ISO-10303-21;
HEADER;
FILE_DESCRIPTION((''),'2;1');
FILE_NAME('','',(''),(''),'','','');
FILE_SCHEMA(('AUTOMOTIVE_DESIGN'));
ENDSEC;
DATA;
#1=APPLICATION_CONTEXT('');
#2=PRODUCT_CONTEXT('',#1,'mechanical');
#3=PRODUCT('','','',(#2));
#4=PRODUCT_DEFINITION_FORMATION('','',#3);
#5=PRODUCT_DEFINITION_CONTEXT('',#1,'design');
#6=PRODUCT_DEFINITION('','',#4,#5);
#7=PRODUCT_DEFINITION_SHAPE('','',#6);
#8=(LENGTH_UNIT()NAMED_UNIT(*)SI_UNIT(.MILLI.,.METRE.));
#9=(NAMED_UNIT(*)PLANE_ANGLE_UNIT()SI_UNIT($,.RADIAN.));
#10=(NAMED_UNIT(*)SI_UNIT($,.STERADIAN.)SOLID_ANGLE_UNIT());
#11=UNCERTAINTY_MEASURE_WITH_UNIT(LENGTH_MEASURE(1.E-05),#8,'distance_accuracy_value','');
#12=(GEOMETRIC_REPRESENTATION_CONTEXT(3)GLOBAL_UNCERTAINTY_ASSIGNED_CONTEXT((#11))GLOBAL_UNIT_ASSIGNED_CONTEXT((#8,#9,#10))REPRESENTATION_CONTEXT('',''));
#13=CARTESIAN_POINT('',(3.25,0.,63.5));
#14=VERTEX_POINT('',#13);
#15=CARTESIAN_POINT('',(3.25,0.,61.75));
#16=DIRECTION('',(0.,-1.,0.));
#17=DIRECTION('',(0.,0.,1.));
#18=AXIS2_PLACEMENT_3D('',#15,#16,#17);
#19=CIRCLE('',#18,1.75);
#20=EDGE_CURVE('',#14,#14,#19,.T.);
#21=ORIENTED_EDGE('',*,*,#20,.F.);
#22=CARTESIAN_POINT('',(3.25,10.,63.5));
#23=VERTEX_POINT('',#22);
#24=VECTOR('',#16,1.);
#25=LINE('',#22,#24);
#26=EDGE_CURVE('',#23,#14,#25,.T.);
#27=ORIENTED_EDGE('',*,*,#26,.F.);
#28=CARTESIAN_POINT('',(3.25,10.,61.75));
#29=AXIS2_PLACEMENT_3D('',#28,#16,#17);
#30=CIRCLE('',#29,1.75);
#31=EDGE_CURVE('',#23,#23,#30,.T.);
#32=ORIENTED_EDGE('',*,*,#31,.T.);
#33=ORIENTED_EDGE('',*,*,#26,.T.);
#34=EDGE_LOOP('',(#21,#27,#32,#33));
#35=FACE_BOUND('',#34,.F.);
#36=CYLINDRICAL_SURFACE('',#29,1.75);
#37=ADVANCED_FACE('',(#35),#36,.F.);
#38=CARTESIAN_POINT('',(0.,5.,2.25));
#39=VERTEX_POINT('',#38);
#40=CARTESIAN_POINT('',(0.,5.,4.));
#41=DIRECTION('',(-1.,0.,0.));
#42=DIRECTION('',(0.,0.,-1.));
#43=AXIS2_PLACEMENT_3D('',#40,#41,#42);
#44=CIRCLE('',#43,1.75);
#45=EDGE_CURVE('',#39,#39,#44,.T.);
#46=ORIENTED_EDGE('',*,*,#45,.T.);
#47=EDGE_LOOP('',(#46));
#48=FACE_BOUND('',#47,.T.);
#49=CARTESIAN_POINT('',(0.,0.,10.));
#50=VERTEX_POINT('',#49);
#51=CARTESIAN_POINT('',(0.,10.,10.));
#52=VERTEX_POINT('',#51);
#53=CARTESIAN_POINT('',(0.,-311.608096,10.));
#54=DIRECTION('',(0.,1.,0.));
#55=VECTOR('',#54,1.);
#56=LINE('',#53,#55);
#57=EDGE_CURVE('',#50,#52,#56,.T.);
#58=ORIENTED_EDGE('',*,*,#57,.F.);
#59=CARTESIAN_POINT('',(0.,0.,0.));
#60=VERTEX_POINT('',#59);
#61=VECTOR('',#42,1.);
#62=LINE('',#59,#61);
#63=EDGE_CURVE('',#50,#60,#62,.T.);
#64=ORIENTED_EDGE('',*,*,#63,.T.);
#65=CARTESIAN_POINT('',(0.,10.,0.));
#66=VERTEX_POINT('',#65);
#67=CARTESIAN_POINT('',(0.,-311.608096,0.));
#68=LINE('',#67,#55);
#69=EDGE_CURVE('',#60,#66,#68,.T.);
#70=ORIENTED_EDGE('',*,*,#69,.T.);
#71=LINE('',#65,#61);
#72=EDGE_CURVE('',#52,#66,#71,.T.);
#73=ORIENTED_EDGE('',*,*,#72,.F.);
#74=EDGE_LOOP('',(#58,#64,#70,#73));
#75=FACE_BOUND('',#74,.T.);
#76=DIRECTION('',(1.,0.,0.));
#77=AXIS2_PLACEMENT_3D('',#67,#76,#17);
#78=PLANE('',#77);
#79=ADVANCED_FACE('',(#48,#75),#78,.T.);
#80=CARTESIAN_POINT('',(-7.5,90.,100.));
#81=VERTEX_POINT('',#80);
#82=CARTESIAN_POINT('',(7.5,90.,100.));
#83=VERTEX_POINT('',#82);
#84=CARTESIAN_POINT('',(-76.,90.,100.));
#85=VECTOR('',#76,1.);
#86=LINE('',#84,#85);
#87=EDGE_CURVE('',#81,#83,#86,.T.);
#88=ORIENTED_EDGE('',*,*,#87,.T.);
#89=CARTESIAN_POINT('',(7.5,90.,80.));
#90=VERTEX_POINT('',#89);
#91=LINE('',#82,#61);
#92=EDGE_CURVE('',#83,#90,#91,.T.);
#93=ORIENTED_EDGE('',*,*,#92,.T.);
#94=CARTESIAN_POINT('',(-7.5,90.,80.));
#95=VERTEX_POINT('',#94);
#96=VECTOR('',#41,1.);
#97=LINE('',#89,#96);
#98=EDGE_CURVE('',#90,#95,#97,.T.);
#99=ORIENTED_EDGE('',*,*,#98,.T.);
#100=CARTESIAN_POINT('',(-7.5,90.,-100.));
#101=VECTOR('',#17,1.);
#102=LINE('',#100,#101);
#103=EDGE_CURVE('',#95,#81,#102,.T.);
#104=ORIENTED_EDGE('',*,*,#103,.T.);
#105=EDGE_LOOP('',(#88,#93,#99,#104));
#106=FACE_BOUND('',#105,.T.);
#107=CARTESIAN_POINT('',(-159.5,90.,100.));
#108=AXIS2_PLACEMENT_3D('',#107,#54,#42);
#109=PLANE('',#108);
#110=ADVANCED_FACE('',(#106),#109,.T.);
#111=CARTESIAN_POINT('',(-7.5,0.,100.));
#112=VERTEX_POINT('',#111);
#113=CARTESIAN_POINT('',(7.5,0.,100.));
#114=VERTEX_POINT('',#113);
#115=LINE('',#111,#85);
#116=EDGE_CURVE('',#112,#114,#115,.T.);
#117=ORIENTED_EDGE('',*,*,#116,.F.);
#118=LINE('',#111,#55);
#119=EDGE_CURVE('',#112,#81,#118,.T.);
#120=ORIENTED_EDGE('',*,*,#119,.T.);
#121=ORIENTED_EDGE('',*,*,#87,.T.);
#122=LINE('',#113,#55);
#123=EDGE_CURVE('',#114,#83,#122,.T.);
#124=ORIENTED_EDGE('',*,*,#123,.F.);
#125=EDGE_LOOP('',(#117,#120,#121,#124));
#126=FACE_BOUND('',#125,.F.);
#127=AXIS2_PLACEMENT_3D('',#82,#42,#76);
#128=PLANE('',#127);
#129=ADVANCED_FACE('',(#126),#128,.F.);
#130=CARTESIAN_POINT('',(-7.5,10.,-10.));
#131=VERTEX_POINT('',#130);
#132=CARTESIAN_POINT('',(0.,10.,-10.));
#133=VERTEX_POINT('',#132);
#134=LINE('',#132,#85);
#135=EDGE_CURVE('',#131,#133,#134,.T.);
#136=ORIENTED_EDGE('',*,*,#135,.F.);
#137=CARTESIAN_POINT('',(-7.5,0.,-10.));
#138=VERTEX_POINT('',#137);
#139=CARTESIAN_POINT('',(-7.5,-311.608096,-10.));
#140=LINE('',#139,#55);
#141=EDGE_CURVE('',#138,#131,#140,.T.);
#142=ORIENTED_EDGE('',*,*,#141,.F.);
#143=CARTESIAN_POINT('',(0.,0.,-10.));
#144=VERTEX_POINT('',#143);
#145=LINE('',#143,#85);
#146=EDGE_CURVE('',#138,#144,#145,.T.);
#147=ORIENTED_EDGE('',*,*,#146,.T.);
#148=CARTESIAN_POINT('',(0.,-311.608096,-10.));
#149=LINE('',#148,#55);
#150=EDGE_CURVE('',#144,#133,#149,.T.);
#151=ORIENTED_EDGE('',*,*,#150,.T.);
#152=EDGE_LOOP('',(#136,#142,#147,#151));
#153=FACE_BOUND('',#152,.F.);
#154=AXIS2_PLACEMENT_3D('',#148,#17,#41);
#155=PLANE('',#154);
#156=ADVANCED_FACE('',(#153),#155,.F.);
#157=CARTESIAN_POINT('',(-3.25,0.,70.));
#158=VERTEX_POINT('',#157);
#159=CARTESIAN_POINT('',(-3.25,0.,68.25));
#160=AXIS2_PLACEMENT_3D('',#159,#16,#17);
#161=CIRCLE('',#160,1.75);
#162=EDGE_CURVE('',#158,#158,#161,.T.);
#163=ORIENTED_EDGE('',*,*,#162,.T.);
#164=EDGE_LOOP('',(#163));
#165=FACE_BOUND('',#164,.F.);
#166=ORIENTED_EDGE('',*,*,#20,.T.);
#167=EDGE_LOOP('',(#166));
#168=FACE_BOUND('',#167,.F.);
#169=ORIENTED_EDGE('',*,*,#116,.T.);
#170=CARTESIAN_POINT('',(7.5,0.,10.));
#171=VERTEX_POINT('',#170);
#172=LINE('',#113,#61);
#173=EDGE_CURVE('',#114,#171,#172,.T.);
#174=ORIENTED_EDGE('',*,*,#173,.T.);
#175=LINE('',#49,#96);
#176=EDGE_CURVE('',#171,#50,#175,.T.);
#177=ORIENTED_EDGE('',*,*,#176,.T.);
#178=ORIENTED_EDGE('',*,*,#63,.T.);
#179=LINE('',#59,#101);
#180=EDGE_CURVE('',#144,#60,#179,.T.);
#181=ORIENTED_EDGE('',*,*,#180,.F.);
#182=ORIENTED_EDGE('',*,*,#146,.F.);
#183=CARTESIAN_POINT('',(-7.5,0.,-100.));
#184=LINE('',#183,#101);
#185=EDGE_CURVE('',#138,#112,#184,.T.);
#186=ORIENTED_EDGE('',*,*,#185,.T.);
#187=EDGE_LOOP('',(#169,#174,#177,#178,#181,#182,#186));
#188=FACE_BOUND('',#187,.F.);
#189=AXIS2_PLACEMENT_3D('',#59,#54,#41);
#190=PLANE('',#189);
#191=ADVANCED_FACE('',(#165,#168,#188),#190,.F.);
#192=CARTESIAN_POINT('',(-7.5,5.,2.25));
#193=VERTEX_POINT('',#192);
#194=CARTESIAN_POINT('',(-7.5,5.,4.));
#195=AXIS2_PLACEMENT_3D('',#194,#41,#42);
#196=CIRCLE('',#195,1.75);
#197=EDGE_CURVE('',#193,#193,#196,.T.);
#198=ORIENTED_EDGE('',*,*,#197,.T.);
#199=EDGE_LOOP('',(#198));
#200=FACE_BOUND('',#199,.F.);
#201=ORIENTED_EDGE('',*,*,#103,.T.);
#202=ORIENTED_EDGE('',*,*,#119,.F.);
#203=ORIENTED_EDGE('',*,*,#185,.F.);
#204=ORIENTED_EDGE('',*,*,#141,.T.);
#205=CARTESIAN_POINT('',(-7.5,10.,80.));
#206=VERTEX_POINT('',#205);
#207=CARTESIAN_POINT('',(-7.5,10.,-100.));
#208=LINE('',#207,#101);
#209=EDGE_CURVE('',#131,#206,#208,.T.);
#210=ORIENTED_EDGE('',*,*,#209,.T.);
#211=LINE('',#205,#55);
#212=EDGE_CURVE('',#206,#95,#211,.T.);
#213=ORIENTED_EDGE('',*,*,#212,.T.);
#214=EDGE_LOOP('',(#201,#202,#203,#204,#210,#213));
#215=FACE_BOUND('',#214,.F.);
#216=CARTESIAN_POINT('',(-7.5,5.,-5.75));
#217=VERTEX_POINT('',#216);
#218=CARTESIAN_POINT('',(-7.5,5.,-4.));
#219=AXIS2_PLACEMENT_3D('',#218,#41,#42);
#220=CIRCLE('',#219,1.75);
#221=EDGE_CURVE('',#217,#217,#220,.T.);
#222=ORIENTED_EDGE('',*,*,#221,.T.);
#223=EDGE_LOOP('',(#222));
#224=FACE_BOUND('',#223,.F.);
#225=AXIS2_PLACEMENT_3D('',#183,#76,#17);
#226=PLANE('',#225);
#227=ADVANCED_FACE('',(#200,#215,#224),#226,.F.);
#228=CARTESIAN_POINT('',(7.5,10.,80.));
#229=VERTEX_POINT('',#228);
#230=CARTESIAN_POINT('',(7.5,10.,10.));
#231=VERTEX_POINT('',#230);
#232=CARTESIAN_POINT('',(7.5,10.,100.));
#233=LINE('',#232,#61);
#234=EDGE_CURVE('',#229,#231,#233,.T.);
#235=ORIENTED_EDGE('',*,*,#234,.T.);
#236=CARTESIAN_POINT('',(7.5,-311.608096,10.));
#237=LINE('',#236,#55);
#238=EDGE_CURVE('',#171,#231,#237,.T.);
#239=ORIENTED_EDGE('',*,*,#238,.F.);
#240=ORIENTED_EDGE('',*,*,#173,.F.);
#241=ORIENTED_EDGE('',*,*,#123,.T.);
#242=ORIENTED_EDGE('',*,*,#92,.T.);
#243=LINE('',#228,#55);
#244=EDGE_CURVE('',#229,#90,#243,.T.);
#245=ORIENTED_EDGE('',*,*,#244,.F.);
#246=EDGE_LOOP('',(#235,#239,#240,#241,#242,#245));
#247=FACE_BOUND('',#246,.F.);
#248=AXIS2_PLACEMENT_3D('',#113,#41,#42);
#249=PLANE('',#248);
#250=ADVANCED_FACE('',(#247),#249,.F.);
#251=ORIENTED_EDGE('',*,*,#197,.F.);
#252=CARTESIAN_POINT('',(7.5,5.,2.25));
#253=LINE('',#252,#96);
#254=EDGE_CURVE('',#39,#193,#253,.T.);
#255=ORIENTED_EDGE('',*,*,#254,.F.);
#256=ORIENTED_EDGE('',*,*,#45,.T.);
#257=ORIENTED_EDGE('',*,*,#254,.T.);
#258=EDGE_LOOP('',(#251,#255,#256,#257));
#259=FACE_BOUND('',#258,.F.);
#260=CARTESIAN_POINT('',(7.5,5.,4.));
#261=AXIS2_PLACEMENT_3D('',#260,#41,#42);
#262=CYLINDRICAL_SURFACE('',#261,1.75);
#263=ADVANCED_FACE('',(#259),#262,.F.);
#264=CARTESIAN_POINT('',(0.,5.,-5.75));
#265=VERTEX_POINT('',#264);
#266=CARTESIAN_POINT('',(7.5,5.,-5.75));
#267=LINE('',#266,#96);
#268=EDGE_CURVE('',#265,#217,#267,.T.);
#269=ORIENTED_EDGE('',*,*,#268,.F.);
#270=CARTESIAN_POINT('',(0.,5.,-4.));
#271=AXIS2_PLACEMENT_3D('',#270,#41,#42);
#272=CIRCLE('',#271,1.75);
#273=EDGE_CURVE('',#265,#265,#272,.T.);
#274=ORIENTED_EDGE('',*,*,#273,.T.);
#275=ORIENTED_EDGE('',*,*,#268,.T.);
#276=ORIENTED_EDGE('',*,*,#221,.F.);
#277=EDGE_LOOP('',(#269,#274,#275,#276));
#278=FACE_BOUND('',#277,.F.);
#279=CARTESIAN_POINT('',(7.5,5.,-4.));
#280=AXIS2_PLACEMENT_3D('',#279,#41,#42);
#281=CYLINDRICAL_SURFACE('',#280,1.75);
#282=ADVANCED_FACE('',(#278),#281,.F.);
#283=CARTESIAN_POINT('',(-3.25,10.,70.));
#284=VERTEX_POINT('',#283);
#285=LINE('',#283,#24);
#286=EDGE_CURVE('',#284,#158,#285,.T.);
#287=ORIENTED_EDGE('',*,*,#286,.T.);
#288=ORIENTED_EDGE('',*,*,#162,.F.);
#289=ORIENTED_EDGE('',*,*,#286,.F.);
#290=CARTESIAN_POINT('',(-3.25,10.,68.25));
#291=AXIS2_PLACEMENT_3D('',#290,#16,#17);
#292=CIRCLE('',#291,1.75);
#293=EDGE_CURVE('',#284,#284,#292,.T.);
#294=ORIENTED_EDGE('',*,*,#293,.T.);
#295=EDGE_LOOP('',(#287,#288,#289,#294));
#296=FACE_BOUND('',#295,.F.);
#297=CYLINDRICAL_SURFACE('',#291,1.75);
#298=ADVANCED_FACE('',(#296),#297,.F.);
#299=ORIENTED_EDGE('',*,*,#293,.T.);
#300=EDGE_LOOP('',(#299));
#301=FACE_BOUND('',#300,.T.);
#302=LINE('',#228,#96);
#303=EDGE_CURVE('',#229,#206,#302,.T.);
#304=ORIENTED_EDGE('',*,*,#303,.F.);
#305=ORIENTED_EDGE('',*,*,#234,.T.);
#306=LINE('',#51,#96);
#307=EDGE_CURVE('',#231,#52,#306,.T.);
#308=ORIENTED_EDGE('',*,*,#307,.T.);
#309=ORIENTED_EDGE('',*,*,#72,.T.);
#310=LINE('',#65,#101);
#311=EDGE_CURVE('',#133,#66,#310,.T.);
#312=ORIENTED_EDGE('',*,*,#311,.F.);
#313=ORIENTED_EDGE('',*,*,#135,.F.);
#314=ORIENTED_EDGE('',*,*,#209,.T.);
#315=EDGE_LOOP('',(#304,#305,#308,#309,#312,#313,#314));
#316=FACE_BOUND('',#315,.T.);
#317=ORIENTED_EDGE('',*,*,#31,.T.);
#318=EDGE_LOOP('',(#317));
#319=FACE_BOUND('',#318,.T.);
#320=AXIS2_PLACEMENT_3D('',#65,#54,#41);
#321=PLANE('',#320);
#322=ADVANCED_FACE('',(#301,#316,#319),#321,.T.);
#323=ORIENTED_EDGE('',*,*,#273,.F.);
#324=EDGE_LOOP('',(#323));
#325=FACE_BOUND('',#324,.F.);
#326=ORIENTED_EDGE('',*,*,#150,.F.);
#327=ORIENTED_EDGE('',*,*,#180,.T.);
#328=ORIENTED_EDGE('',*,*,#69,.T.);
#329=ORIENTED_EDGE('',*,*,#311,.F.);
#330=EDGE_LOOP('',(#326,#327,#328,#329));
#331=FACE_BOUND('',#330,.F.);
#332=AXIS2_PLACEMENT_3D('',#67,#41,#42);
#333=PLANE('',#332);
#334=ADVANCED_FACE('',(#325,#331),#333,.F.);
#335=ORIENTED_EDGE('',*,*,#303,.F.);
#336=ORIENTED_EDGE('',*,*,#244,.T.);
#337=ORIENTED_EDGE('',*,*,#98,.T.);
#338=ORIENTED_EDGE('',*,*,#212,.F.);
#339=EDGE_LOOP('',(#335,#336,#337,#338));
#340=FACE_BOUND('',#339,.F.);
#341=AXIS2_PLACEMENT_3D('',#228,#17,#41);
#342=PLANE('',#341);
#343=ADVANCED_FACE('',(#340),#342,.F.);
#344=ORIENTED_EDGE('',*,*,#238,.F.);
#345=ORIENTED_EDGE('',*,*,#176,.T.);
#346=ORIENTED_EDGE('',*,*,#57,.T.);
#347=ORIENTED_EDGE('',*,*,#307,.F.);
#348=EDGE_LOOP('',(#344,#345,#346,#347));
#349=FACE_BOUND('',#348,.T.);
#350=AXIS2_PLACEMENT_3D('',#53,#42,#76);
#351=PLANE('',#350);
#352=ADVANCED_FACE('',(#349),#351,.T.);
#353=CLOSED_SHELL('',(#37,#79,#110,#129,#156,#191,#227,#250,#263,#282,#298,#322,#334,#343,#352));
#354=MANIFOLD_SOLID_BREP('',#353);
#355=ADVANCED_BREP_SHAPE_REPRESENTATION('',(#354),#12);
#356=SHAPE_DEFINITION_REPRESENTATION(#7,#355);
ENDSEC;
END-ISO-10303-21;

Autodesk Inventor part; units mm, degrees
ref_plane "YZ Plane" through (0, 0, 0) normal (1, 0, 0) x (0, 1, 0)
ref_plane "XZ Plane" through (0, 0, 0) normal (0, 1, 0) x (-1, 0, 0)
ref_plane "XY Plane" through (0, 0, 0) normal (0, 0, 1) x (1, 0, 0)
sketch "Boceto2" plane through (0, 0, 0) normal (0, 1, 0) x (-1, 0, 0)
  line L0 (7.5, 100) -> (-7.5, 100)
  line L1 (-7.5, 100) -> (-7.5, -100)
  line L2 (-7.5, -100) -> (7.5, -100)
  line L3 (7.5, -100) -> (7.5, 100)
  line L4 (7.5, 100) -> (-7.5, -100) construction
  line L5 (-7.5, 100) -> (7.5, -100) construction
  point P0 (0, 0)
  dimension "d7" = 15
  dimension "d8" = 200
extrude "Extrusión1" add sketch "Boceto2" along normal blind 10
sketch "Boceto3" plane through (0, 10, 0) normal (0, 1, 0) x (1, 0, 0)
  line L0 (5, 60) -> (-5, 60)
  line L1 (-5, 60) -> (-5, 70)
  line L2 (-5, 70) -> (5, 70)
  line L3 (5, 70) -> (5, 60)
  line L4 (5, 60) -> (-5, 70) construction
  line L5 (7.5, 100) -> (-7.5, 100) projected
  line L6 (0, 64.5148) -> (0, 61.9205)
  circle A0 centre (3.25, 61.75) radius 1.75
  circle A1 centre (-3.25, 68.25) radius 1.75
  line L7 (-7.5, 100) -> (-7.5, -100) projected
  line L8 (-7.5, 0) -> (0, 0)
  line L9 (5, -70) -> (5, -60)
  line L10 (-5, -70) -> (5, -70)
  line L11 (5, -60) -> (-5, -60)
  line L12 (-5, -60) -> (-5, -70)
  line L13 (5, -60) -> (-5, -70) construction
  line L14 (0, -64.5148) -> (0, -61.9205)
  circle A2 centre (-3.25, -68.25) radius 1.75
  circle A3 centre (3.25, -61.75) radius 1.75
  point P0 (3.25, 68.25)
  point P1 (-5, 65)
  point P2 (-3.25, 61.75)
  point P3 (0, 100)
  point P4 (3.25, -68.25)
  point P5 (-3.25, -61.75)
  point P6 (-5, -65)
  dimension "d12" = 1.75
  dimension "d13" = 1.75
  dimension "d14" = 1.75
  dimension "d15" = 1.75
  dimension "d16" = 10
  dimension "d17" = 10
  dimension "d19" = 30
  dimension "d67" = 31.75
hole "Agujero1" at (3.25, 10, -61.75) at (-3.25, 10, -68.25) at (-3.25, 10, 68.25) at (3.25, 10, 61.75) direction (0, -1, 0) diameter 3.5 end through all
sketch "Boceto4" plane through (0, 10, 0) normal (0, 1, 0) x (1, 0, 0)
  line L0 (-7.5, 100) -> (-7.5, -100) projected
  line L1 (-7.5, -100) -> (7.5, -100)
  line L2 (7.5, -100) -> (7.5, -80)
  line L3 (7.5, -80) -> (-7.5, -80)
  line L4 (-7.5, -80) -> (-7.5, -100)
  line L5 (-7.5, 0) -> (1.0116, 0)
  line L6 (-7.5, -100) -> (-7.5, 100)
  line L7 (-7.5, 100) -> (7.5, 100)
  line L8 (7.5, 100) -> (7.5, 80)
  line L9 (7.5, 80) -> (-7.5, 80)
  line L10 (-7.5, 80) -> (-7.5, 100)
  point P0 (0, 0)
  point P1 (-7.5, -80)
  point P2 (-7.5, 80)
  dimension "d27" = 15
  dimension "d28" = 20
extrude "Extrusión2" add sketch "Boceto4" along normal blind 80
sketch "Boceto5" plane through (0, 90, 0) normal (0, 1, 0) x (1, 0, 0)
  line L0 (-7.5, -100) -> (7.5, -100) projected
  line L1 (-7.5, -100) -> (40.5, -100)
  line L2 (40.5, -100) -> (40.5, 100)
  line L3 (40.5, 100) -> (-7.5, 100)
  line L4 (-7.5, 100) -> (-7.5, -100)
  line L5 (40.5, -100) -> (-159.5, -100)
  line L6 (-159.5, -100) -> (-159.5, 100)
  line L7 (-159.5, 100) -> (40.5, 100)
  line L8 (40.5, 100) -> (40.5, -100)
  point P0 (0, 0)
  point P1 (-7.5, 100)
  dimension "d31" = 48
  dimension "d32" = 200
  dimension "d74" = 200
extrude "Extrusión3" add sketch "Boceto5" along normal blind 110
sketch "Boceto6" plane through (0, 200, 0) normal (0, 1, 0) x (1, 0, 0)
  line L0 (40.5, 100) -> (7.5, 100) projected
  line L1 (40.5, 100) -> (20.5, 100)
  line L2 (20.5, 100) -> (20.5, 80)
  line L3 (7.5, -100) -> (40.5, -100) projected
  line L4 (24, -100) -> (24, -80)
  line L5 (-159.5, 100) -> (-159.5, -100) projected
  line L6 (20.5, 80) -> (-159.5, 80)
  line L7 (-159.5, 80) -> (-159.5, -80)
  line L8 (-159.5, -80) -> (20.5, -80)
  line L9 (20.5, -80) -> (20.5, 80)
  line L10 (-159.5, -100) -> (40.5, -100) projected
  point P0 (7.5, 80)
  point P1 (-159.5, 80)
  dimension "d36" = 20
  dimension "d37" = 20
  dimension "d38" = 20
  dimension "d78" = 20
extrude "Extrusión4" cut sketch "Boceto6" against normal blind 90
sketch "Boceto7" plane through (-159.5, 90, -100) normal (-1, 0, 0) x (0, 0, 1)
  line L0 (0, 110) -> (20, 110) projected
  line L1 (20, 110) -> (10, 110)
  line L2 (10, 110) -> (10, 20)
  line L3 (10, 20) -> (20, 20)
  line L4 (20, 20) -> (20, 110)
  line L5 (180, 110) -> (180, 20) projected
  line L6 (180, 110) -> (190, 110)
  line L7 (190, 110) -> (190, 20)
  line L8 (190, 20) -> (180, 20)
  line L9 (180, 20) -> (180, 110)
  line L10 (200, 0) -> (200, 110) projected
  line L11 (0, 0) -> (0, 110) projected
  line L12 (0, 110) -> (10, 110)
  line L13 (10, 110) -> (10, 20)
  line L14 (10, 20) -> (0, 20)
  line L15 (0, 20) -> (0, 110)
  line L16 (200, 110) -> (0, 110) projected
  line L17 (200, 110) -> (190, 110)
  line L18 (190, 110) -> (190, 20)
  line L19 (190, 20) -> (200, 20)
  line L20 (200, 20) -> (200, 110)
  point P0 (100, -90)
  point P1 (200, 20)
  dimension "d42" = 10
  dimension "d63" = 10
  dimension "d65" = 10
extrude "Extrusión5" cut sketch "Boceto7" against normal blind 30 contours L0 L2 L14 L11 | L16 L10 L19 L7
sketch "Boceto8" plane through (-7.5, 0, 100) normal (0, 0, 1) x (1, 0, 0)
  line L0 (-122, 200) -> (-122, 110) projected
  line L1 (-132, 175) -> (-142, 175)
  line L2 (-142, 175) -> (-142, 185)
  line L3 (-142, 185) -> (-132, 185)
  line L4 (-132, 185) -> (-132, 175)
  line L5 (-132, 175) -> (-142, 185) construction
  line L6 (-142, 175) -> (-132, 185) construction
  line L7 (-152, 200) -> (48, 200) projected
  line L8 (-113, 155) -> (-128, 155)
  line L9 (-152, 110) -> (-122, 110) projected
  line L10 (-132, 180) -> (-131.5898, 180)
  circle A0 centre (-140.25, 183.25) radius 1.75
  circle A1 centre (-133.75, 176.75) radius 1.75
  line L11 (-132, 125) -> (-132, 135)
  line L12 (-142, 125) -> (-132, 125)
  line L13 (-132, 135) -> (-142, 125) construction
  line L14 (-132, 135) -> (-142, 135)
  line L15 (-142, 135) -> (-132, 125) construction
  line L16 (-142, 135) -> (-142, 125)
  line L17 (-132, 130) -> (-131.5898, 130)
  circle A2 centre (-133.75, 133.25) radius 1.75
  circle A3 centre (-140.25, 126.75) radius 1.75
  line L18 (-152, 110) -> (-152, 200) projected
  point P0 (7.5, 0)
  point P1 (-113, 215)
  point P2 (-133.75, 183.25)
  point P3 (-142, 180)
  point P4 (-140.25, 176.75)
  point P5 (48, 200)
  point P6 (-133.75, 126.75)
  point P7 (-140.25, 133.25)
  point P8 (-143, 115)
  point P9 (-133.75, 126.75)
  point P10 (-140.25, 133.25)
  point P11 (-142, 130)
  dimension "d46" = 1.75
  dimension "d47" = 1.75
  dimension "d48" = 1.75
  dimension "d49" = 1.75
  dimension "d50" = 10
  dimension "d51" = 10
  dimension "d52" = 15
  dimension "d66" = 10
  dimension "d70" = 15
hole "Agujero2" at (-147.75, 183.25, 100) at (-141.25, 176.75, 100) at (-147.75, 126.75, 100) at (-141.25, 133.25, 100) direction (0, 0, -1) diameter 3.5 end through all
ref_plane "Plano de trabajo1" through (-159.5, 90, 100) normal (0, -1, 0) x (1, 0, 0)
split "Dividir1" plane through (-159.5, 90, 100) removes the side toward (0, 1, 0)
sketch "Boceto9" plane through (0, 10, 0) normal (0, 1, 0) x (1, 0, 0)
  line L0 (0, 0) -> (0, -10)
  line L1 (0, -10) -> (7.5, -10)
  line L2 (7.5, -80) -> (7.5, 80) projected
  line L3 (0, 0) -> (0, 10)
  line L4 (0, 10) -> (-7.5, 10)
  line L5 (-7.5, 80) -> (-7.5, -80) projected
  dimension "d83" = 10
  dimension "d84" = 10
ref_plane "Plano de trabajo2" through (-7.5, 10, 0) normal (0, 0, 1) x (1, 0, 0)
sketch "Boceto10" plane through (7.5, 0, 100) normal (1, 0, 0) x (0, 0, -1)
  circle A0 centre (96, 5) radius 1.75
  line L0 (100, -18) -> (100, 108) projected
  line L1 (0, 0) -> (200, 0) projected
  circle A1 centre (104, 5) radius 1.75
  point P0 (100, 0)
  dimension "d85" = 3.5
  dimension "d86" = 4
  dimension "d87" = 5
hole "Agujero3" at (7.5, 5, 4) at (7.5, 5, -4) direction (-1, 0, 0) diameter 3.5 end through all
split body "Dividir2" sketch "Boceto9" result one side removed curves L1 L0 L3 L4 removed pieces at (7, 33.3333, -93.3333)
properties part number "container_back_foot_1"
